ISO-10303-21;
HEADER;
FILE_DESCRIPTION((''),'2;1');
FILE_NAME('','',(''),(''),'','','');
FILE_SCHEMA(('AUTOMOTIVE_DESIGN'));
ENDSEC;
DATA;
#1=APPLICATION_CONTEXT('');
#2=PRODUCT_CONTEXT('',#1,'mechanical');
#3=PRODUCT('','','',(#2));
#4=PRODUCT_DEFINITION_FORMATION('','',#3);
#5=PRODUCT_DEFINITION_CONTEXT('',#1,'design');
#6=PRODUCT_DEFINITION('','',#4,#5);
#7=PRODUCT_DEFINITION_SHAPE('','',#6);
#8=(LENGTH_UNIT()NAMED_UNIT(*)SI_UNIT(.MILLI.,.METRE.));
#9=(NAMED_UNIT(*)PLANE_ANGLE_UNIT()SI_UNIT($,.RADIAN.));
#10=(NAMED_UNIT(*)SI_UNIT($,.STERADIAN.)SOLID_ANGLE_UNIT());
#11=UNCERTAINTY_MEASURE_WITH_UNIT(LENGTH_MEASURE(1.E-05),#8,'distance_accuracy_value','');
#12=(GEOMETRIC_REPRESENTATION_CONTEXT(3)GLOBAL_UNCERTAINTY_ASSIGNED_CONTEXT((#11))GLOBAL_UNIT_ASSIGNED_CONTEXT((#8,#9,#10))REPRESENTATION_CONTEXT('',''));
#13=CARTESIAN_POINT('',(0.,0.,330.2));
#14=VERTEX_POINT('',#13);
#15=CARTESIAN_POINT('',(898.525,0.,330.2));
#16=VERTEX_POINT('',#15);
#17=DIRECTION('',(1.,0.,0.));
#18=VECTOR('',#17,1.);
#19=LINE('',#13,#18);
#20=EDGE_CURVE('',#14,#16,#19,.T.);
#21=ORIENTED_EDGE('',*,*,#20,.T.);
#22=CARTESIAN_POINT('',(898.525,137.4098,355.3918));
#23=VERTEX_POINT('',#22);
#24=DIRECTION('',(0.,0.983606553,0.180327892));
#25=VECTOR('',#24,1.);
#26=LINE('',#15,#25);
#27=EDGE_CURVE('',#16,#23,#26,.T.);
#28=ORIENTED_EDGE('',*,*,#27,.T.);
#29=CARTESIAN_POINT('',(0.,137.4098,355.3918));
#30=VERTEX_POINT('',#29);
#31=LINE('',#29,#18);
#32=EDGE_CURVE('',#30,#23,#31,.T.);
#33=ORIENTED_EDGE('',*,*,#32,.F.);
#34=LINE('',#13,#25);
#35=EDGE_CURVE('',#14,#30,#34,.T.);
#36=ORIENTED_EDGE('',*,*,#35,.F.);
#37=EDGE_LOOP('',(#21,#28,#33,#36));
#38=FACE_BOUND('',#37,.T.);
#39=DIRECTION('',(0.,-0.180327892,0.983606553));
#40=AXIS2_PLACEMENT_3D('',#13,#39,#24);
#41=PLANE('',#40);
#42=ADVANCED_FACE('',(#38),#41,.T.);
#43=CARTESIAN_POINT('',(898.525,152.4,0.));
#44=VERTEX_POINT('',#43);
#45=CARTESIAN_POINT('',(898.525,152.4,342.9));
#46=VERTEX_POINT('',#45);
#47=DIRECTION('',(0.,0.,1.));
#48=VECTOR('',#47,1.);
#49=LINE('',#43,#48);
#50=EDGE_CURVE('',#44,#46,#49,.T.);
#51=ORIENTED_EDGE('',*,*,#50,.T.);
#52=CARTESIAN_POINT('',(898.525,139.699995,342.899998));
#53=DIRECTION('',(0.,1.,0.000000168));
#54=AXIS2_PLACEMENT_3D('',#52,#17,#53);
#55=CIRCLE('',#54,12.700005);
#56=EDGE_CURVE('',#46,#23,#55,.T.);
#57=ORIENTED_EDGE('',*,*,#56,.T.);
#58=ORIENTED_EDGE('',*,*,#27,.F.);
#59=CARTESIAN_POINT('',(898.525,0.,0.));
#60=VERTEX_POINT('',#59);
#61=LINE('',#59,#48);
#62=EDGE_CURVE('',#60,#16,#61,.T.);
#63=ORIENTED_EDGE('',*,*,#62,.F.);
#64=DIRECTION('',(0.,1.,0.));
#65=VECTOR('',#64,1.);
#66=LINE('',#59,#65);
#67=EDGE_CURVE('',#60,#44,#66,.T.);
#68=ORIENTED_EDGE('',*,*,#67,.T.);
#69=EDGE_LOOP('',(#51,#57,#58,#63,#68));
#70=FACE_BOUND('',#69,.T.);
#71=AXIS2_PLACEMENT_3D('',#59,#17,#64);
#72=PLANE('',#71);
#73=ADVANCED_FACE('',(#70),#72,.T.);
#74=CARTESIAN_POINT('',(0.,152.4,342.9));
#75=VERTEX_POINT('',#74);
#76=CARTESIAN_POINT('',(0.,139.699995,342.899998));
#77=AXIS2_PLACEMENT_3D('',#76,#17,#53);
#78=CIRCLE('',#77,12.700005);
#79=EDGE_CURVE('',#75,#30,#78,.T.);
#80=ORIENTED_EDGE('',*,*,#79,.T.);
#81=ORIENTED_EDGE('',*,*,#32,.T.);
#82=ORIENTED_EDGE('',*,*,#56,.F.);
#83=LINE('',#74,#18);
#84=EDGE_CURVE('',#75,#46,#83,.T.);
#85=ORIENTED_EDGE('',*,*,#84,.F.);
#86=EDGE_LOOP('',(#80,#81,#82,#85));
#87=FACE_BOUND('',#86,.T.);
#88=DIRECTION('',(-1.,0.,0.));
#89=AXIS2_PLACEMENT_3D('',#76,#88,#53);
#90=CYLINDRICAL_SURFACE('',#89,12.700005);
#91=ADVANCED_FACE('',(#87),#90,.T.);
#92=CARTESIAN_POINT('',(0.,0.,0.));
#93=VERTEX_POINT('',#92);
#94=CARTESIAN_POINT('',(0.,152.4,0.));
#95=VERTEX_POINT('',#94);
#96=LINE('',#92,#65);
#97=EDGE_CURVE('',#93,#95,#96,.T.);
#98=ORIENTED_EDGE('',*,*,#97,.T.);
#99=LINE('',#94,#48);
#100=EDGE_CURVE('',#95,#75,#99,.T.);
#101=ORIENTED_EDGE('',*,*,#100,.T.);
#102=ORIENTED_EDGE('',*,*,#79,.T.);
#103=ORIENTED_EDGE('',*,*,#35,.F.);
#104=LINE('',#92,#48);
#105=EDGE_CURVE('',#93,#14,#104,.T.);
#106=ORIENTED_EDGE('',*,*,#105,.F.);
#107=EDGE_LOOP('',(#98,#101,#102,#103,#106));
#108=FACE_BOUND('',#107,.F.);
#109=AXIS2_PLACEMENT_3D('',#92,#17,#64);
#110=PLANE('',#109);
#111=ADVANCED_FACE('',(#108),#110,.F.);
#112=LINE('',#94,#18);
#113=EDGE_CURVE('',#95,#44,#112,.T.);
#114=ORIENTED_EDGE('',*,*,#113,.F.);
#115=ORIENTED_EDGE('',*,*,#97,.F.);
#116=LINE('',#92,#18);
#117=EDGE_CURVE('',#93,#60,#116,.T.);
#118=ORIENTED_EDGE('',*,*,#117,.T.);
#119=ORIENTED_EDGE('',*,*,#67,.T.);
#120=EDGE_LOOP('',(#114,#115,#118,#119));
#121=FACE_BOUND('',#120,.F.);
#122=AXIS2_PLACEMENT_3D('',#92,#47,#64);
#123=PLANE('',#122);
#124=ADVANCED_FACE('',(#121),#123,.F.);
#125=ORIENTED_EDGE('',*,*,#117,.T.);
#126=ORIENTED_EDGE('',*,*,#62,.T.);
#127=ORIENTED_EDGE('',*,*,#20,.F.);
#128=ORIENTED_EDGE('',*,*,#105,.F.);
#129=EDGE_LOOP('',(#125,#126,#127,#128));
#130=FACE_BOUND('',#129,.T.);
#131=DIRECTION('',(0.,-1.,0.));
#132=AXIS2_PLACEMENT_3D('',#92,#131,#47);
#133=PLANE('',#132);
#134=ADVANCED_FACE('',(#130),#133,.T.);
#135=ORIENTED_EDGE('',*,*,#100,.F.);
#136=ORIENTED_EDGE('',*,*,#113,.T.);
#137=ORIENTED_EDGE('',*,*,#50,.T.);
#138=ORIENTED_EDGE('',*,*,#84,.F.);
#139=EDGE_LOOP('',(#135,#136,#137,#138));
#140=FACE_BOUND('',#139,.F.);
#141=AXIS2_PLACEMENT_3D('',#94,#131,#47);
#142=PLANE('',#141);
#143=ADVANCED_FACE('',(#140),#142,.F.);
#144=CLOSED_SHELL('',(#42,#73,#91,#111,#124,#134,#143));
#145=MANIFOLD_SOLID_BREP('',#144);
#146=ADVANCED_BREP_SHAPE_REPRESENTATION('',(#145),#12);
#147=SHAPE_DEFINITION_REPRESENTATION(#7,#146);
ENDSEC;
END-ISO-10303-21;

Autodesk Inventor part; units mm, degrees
ref_plane "YZ Plane" through (0, 0, 0) normal (1, 0, 0) x (0, 1, 0)
ref_plane "XZ Plane" through (0, 0, 0) normal (0, 1, 0) x (-1, 0, 0)
ref_plane "XY Plane" through (0, 0, 0) normal (0, 0, 1) x (1, 0, 0)
sketch "Profile" plane through (0, 0, 0) normal (0, 0, 1) x (1, 0, 0)
  line L0 (0, 0) -> (0, 330.2)
  line L1 (0, 0) -> (152.4, 0)
  line L2 (152.4, 0) -> (152.4, 342.9)
  line L3 (152.4, 342.9) -> (139.7, 342.9) construction
  line L4 (152.4, 342.9) -> (139.7, 342.9) construction
  arc A0 (152.4, 342.9) -> (137.4098, 355.3918) centre (139.7, 342.9) ccw
  line L5 (0, 330.2) -> (137.4098, 355.3918)
  dimension "d0" = 330.2
  dimension "d1" = 152.4
  dimension "d2" = 342.9
  dimension "d3" = 12.7
  dimension "d4" = 12.7
sketch "Sketch1" plane through (0, 0, 0) normal (1, 0, 0) x (0, 1, 0)
  line L0 (0, 0) -> (0, 330.2)
  line L1 (0, 0) -> (152.4, 0)
  line L2 (152.4, 0) -> (152.4, 342.9)
  line L3 (152.4, 342.9) -> (139.7, 342.9) construction
  line L4 (152.4, 342.9) -> (139.7, 342.9) construction
  arc A0 (152.4, 342.9) -> (137.4098, 355.3918) centre (139.7, 342.9) ccw
  line L5 (0, 330.2) -> (137.4098, 355.3918)
extrude "Extrusion1" add sketch "Sketch1" along normal blind 898.525
properties part number "L" material "Granite, Cut, Polished"
